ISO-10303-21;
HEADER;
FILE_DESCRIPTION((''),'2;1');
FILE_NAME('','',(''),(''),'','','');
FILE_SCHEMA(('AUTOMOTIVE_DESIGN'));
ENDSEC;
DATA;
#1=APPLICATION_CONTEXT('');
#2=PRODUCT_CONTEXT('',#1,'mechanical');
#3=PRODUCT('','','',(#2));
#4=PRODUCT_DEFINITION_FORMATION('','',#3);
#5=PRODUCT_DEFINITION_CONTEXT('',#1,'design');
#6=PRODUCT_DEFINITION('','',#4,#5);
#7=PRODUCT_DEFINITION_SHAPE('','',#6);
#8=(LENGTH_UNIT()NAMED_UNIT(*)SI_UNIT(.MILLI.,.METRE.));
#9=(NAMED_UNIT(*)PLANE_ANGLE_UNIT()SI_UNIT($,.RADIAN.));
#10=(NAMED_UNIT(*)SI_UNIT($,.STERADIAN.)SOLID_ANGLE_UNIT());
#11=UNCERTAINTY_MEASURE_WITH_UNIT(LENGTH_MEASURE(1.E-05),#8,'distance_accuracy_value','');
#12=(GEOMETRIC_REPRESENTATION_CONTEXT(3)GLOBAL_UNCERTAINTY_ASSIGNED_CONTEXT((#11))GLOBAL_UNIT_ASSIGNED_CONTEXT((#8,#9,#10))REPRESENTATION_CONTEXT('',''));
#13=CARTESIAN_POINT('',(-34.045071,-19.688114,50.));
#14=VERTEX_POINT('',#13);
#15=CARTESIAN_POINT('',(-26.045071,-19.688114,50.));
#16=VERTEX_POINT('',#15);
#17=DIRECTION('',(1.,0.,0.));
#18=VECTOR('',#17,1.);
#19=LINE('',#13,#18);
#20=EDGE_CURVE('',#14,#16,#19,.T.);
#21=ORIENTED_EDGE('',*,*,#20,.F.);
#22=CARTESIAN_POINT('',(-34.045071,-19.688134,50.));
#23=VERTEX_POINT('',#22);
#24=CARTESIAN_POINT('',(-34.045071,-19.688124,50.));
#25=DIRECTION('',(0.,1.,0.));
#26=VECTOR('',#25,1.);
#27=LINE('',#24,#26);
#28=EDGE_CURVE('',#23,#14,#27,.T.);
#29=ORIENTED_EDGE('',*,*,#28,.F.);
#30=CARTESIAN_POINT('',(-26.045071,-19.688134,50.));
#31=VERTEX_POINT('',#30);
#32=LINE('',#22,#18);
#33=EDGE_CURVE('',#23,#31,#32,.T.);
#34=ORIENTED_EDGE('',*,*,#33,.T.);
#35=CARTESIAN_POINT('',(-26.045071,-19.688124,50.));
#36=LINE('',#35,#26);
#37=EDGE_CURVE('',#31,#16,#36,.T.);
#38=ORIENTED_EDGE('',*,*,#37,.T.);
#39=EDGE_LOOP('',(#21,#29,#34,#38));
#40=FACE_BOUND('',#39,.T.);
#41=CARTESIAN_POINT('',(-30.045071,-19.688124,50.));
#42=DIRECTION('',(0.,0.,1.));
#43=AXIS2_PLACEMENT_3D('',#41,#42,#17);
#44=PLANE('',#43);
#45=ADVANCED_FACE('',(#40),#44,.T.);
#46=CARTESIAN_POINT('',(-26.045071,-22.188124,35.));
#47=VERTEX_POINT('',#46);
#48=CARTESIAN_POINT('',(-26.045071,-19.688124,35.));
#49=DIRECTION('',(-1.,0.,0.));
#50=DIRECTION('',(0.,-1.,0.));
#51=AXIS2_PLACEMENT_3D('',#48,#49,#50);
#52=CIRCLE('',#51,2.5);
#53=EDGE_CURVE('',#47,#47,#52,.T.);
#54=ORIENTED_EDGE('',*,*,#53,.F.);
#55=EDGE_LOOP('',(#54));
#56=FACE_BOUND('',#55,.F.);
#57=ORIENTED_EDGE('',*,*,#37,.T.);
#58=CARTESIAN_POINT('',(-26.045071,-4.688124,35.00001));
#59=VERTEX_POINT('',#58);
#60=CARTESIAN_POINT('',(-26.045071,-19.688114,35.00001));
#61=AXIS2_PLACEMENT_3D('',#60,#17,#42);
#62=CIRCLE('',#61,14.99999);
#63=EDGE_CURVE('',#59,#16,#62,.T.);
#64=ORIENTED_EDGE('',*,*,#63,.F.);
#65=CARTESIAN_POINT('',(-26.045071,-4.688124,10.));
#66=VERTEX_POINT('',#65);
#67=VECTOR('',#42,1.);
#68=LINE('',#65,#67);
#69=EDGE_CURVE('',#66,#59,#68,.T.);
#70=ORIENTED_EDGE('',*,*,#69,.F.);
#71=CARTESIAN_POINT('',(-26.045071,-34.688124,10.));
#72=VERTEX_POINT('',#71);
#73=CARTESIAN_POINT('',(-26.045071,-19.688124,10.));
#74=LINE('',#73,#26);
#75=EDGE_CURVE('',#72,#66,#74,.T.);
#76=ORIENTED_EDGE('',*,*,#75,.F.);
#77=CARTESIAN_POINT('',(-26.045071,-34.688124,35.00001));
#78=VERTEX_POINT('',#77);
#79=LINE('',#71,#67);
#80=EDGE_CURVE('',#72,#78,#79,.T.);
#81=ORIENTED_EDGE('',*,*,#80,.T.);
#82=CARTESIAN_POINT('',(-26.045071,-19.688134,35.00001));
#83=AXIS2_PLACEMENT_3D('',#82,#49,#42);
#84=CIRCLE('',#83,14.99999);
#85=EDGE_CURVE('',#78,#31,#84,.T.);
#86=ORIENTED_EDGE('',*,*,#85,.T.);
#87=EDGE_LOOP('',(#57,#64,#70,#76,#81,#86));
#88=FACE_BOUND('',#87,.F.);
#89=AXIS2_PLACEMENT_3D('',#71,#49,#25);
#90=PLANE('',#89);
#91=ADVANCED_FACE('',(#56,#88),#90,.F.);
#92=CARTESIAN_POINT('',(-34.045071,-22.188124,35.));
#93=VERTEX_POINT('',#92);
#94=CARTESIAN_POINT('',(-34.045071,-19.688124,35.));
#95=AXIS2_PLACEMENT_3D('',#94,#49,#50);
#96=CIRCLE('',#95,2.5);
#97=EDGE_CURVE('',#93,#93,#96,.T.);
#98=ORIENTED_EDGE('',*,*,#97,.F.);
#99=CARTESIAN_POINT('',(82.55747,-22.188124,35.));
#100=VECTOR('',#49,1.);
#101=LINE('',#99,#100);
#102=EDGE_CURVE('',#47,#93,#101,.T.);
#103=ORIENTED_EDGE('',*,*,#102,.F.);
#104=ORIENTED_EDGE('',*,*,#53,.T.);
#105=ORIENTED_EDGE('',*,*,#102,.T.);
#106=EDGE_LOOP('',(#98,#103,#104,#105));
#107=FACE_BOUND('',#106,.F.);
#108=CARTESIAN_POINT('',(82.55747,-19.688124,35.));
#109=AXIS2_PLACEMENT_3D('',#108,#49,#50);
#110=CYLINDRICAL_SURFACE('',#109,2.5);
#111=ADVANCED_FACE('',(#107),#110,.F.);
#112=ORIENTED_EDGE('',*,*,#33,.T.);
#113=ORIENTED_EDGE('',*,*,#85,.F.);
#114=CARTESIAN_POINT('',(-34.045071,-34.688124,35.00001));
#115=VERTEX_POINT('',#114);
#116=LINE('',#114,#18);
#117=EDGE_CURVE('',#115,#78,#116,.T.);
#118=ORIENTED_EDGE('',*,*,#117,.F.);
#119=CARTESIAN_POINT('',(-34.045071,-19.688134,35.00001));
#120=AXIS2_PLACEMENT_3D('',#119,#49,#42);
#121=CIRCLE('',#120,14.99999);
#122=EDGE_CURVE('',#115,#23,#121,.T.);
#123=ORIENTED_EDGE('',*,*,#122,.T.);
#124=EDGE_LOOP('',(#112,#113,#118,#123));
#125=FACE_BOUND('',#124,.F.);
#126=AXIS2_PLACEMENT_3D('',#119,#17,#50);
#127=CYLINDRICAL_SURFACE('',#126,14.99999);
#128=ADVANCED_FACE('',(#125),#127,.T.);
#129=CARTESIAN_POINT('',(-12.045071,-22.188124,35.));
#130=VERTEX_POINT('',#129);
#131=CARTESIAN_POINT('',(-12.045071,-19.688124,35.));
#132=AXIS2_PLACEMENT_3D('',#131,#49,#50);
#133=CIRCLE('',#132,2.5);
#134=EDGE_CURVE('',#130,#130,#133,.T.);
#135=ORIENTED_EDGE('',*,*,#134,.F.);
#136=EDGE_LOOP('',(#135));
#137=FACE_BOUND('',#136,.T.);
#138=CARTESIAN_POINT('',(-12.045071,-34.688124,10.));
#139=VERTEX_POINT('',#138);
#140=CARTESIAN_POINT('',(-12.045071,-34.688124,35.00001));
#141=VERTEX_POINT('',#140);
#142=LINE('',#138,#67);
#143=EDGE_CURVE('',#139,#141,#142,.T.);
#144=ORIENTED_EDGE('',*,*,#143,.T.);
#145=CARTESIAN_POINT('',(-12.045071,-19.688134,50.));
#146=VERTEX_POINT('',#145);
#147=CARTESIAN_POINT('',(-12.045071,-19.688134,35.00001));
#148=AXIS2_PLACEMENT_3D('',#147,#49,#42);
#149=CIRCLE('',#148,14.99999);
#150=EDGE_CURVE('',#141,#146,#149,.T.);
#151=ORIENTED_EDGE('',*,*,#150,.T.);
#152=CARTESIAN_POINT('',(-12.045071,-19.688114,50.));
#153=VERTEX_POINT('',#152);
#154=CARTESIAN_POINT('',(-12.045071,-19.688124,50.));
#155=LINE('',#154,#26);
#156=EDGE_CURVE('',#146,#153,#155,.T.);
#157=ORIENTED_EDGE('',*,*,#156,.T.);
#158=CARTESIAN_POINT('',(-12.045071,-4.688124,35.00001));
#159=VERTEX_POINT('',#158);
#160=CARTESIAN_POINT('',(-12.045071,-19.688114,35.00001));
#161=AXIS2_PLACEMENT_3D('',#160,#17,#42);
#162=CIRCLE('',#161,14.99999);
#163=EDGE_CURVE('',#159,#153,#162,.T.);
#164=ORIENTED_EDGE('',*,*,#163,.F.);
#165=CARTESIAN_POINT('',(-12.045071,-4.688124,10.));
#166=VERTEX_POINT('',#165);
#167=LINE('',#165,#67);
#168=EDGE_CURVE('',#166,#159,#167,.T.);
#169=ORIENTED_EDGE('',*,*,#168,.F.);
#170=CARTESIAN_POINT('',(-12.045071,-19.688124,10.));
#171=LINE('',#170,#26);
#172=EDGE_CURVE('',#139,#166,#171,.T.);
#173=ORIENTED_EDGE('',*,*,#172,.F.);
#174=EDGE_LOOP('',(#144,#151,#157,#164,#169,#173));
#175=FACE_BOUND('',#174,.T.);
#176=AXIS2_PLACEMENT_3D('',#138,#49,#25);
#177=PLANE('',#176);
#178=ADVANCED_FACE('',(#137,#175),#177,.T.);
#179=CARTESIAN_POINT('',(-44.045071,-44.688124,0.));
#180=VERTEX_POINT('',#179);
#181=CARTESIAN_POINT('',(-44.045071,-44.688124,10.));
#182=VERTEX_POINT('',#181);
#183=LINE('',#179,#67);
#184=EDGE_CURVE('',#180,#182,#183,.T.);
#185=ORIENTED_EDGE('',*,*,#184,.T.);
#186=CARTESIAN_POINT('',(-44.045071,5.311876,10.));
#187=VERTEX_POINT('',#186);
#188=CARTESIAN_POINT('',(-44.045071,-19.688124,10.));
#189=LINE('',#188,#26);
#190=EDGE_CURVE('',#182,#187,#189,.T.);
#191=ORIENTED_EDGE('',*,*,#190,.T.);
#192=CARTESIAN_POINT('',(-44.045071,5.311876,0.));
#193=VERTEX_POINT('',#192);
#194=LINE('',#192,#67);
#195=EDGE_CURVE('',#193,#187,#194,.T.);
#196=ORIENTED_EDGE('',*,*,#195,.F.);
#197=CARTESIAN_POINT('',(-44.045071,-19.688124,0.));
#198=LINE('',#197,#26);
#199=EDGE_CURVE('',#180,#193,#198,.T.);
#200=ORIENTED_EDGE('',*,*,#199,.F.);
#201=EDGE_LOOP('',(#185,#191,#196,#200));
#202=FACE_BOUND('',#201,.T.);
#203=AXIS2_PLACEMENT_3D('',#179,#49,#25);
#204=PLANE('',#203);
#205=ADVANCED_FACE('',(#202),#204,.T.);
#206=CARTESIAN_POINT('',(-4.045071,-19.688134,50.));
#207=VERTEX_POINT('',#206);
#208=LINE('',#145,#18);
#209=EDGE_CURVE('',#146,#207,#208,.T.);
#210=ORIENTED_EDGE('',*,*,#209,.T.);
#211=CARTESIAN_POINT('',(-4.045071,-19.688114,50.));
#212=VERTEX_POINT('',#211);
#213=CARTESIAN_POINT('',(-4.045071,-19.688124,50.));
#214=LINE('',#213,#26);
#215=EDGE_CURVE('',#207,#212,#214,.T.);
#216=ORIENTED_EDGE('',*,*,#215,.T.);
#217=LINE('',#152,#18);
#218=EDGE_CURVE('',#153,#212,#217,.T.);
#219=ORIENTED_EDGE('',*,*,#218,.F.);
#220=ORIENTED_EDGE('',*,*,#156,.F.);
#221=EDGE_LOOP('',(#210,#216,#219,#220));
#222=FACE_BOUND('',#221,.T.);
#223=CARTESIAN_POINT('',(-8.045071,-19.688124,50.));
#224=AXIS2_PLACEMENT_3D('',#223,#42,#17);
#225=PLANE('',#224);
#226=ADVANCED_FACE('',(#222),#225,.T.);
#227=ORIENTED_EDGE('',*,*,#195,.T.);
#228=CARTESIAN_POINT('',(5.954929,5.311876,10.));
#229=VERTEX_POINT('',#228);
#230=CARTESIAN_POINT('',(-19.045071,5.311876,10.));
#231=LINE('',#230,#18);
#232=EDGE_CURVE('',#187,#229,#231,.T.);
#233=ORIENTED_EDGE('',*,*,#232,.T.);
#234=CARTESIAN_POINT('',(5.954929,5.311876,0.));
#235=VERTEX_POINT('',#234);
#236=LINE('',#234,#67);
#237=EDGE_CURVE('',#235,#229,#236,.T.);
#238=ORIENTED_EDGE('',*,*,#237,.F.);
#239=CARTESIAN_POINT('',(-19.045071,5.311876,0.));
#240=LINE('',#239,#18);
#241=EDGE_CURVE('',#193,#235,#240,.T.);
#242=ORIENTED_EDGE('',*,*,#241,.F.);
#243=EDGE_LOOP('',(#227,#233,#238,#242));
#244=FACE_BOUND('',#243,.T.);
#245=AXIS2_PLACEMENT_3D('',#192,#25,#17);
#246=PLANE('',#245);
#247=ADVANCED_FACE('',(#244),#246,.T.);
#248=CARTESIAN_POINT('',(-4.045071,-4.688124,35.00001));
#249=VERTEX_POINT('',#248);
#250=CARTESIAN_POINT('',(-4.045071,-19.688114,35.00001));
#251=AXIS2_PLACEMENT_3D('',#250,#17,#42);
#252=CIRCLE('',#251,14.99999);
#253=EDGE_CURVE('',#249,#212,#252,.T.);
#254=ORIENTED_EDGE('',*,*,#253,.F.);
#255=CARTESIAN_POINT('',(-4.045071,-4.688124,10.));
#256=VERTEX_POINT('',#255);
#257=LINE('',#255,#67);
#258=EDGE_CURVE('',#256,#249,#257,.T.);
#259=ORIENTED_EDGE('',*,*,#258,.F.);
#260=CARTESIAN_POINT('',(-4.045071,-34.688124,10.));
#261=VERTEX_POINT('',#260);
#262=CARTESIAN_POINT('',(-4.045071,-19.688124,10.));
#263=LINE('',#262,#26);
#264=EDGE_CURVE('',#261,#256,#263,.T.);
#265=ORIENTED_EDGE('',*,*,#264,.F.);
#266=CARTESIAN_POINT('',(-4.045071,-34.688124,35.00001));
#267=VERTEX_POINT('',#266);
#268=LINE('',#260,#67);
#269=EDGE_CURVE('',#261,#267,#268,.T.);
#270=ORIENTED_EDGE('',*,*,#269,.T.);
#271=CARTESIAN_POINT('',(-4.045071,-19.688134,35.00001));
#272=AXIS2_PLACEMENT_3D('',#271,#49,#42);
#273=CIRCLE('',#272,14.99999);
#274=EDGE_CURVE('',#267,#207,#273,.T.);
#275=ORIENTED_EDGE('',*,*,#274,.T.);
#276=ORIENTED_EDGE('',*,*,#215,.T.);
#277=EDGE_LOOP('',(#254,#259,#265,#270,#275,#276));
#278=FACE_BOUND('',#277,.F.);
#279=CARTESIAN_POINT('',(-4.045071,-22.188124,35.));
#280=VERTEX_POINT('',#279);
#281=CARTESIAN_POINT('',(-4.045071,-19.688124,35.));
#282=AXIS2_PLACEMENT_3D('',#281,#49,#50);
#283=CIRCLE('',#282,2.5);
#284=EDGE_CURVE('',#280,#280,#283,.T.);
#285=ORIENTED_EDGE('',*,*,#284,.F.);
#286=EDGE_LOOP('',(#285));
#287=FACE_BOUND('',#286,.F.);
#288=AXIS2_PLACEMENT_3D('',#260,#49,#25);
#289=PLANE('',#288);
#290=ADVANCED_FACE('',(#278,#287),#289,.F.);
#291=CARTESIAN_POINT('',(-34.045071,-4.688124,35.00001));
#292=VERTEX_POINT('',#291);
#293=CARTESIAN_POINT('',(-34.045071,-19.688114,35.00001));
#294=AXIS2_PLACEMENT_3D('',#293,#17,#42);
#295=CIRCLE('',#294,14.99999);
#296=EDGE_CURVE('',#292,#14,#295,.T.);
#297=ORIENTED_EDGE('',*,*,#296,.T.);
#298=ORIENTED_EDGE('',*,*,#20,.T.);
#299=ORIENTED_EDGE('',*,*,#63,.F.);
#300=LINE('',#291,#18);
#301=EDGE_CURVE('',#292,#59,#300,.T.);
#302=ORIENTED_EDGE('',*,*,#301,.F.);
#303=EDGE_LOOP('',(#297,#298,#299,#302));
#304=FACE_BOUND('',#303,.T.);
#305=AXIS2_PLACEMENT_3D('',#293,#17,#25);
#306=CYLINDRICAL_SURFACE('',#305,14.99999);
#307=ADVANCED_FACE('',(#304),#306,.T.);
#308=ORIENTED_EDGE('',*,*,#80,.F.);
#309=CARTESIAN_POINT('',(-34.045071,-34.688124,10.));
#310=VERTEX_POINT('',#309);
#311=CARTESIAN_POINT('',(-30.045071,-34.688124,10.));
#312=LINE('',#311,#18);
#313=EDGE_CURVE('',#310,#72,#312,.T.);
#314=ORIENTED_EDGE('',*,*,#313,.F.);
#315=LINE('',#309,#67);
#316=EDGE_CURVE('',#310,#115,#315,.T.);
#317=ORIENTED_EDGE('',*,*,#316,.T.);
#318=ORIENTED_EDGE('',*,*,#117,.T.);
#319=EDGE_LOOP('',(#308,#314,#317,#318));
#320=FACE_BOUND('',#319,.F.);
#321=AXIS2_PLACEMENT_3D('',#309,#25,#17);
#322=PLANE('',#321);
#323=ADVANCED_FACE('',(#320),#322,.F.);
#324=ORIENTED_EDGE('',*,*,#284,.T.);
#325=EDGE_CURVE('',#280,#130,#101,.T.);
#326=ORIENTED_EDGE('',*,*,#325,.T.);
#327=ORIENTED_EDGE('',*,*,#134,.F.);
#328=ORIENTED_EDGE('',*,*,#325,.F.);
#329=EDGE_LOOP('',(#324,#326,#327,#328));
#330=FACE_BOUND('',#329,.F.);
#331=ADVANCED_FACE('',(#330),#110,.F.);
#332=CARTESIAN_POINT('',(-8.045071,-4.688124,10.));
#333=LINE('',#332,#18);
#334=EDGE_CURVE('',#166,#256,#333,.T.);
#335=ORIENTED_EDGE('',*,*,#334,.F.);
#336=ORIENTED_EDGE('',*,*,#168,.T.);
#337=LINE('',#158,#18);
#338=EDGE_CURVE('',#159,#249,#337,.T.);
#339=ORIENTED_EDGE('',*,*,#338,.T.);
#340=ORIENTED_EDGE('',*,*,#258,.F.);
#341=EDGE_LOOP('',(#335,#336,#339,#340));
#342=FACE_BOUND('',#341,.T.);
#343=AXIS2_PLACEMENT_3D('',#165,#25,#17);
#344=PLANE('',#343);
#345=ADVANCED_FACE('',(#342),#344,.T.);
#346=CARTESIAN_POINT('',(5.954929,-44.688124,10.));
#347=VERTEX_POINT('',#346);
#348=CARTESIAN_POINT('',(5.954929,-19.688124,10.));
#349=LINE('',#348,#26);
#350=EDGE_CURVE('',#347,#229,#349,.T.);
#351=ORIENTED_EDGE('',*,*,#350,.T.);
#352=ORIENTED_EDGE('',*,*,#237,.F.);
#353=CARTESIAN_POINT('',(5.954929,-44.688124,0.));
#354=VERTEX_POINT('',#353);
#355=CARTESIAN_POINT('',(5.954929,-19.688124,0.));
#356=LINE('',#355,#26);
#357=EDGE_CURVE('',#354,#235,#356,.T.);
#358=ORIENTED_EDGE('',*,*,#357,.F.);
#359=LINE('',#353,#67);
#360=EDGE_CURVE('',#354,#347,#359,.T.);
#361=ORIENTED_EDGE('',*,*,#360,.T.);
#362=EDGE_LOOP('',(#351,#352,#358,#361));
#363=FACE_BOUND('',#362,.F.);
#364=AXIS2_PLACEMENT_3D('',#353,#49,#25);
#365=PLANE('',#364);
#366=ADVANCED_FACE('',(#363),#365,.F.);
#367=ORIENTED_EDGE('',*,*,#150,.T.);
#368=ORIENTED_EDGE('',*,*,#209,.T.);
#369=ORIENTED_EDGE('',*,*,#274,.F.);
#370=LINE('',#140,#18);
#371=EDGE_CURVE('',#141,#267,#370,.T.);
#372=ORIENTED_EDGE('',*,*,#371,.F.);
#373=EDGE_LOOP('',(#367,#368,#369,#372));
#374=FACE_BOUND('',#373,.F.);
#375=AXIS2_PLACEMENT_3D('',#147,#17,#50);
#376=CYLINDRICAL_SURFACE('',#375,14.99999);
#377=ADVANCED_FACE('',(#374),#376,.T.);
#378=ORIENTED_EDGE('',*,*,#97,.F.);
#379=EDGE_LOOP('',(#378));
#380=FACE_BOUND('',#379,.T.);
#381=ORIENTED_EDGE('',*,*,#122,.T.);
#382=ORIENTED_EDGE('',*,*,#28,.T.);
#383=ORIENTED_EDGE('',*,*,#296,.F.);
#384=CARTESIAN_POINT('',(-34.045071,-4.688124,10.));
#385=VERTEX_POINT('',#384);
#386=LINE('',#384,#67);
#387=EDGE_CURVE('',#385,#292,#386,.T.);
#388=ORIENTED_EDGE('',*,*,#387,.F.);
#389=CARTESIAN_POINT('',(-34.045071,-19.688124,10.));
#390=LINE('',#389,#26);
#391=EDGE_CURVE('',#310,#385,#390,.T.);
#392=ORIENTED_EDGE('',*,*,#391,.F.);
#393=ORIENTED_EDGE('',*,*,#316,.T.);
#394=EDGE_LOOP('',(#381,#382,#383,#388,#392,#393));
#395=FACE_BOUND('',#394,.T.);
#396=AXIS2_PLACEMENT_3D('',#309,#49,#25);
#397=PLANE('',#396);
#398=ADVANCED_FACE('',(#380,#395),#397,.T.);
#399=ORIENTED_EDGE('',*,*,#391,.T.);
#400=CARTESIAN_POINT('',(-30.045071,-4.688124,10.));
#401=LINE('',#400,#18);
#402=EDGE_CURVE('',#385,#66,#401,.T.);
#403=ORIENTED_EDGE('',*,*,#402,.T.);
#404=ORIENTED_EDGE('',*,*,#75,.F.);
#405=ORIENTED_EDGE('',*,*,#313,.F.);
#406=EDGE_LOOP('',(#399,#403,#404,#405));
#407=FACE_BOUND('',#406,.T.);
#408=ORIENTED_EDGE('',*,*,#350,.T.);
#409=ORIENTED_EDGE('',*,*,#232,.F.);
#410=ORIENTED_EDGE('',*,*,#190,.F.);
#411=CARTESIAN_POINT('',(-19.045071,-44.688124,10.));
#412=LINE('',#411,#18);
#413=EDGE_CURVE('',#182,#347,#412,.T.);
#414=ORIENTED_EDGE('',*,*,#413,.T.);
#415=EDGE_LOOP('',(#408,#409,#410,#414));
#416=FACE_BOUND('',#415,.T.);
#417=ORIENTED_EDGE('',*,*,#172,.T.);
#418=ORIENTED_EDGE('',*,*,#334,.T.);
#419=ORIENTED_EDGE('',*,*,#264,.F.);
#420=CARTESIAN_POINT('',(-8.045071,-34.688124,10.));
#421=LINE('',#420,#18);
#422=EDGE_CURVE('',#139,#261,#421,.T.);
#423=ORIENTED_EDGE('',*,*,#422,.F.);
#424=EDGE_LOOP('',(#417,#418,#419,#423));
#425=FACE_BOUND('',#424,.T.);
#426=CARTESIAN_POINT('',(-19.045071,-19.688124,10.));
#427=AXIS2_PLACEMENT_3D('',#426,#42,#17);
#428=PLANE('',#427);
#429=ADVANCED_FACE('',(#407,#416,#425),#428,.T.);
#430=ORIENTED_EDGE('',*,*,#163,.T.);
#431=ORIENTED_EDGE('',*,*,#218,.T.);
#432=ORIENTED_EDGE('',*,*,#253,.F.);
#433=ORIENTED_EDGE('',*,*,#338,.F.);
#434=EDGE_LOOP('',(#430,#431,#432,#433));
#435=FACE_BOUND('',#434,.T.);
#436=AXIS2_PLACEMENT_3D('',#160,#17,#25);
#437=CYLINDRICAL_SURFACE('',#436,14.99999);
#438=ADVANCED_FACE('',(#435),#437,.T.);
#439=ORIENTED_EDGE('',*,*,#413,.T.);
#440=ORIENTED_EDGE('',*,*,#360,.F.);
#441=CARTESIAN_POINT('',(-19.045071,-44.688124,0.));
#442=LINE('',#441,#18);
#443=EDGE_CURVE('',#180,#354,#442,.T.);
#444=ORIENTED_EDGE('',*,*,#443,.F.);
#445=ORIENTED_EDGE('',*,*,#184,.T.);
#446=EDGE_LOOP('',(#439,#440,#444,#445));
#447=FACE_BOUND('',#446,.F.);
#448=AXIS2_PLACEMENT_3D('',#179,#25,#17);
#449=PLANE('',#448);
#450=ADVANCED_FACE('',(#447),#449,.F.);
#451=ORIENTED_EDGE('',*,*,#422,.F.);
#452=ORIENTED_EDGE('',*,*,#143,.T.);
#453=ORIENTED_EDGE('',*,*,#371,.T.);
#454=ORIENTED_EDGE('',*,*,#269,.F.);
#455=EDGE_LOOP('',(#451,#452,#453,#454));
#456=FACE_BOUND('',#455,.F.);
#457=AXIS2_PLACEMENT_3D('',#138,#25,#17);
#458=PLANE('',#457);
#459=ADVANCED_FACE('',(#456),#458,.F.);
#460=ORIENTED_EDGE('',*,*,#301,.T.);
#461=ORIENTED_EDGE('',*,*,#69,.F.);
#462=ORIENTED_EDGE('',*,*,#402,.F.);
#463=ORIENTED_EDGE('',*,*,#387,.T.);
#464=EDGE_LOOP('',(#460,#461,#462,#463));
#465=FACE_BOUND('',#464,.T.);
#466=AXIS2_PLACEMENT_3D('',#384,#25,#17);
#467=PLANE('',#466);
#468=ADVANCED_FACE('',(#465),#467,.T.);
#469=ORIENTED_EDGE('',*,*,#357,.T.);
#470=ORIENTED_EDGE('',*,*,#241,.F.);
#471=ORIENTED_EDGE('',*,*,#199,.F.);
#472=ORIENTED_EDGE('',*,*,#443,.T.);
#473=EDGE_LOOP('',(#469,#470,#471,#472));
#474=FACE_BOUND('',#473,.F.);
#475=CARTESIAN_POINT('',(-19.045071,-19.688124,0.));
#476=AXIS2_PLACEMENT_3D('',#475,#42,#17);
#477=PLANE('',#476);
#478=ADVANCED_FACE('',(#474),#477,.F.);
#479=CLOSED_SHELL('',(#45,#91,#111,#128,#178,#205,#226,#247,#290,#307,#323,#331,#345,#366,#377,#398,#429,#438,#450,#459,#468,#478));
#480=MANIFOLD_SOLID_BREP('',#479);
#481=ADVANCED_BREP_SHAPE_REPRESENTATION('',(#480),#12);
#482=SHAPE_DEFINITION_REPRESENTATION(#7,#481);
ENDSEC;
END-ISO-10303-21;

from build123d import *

# Parameters (mm, degrees)
F0_W     = 50
F0_H     = 50
F1_DEPTH = 10
F3_W     = 8
F3_H     = 30
F4_DEPTH = 40
F2_W     = 8
F2_H     = 30
F5_DEPTH = 40
F6_R     = 14.99999
F8_D     = 5


# Not quite as in the source:
# - a fillet or chamfer is up to 0.001 mm smaller than in the source, because OpenCascade refuses the exact size


with BuildPart() as f1:
    # F0 (on Top) → F1 (new body)
    with BuildSketch(Plane.XY):
        with Locations((-19.0450707451, -19.6881243537)):
            Rectangle(F0_W, F0_H)
    extrude(amount=F1_DEPTH)

    # F3 (on face) → F4 (join)
    with BuildSketch(Plane.XY.offset(10)):
        with Locations((-8.0450707451, -19.6881243537)):
            Rectangle(F3_W, F3_H)
    extrude(amount=F4_DEPTH)

    # F2 (on face) → F5 (join)
    with BuildSketch(Plane.XY.offset(10)):
        with Locations((-30.0450707451, -19.6881243537)):
            Rectangle(F2_W, F2_H)
    extrude(amount=F5_DEPTH)

    # F6 (radius 15 in the source; OpenCascade refuses exactly that, so slightly less here)
    f6_edges = [f1.edges().sort_by_distance(p)[0] for p in [
        (-8.045071, -4.688124, 50),
        (-30.045071, -4.688124, 50),
        (-8.045071, -34.688124, 50),
        (-30.045071, -34.688124, 50),
    ]]
    fillet(f6_edges, radius=F6_R)

    # F8 (through all)
    with Locations(Plane.YZ.offset(-4.0450707451)):
        with Locations((-19.6881243537, 35)):
            Hole(F8_D / 2)


solid = f1.part
